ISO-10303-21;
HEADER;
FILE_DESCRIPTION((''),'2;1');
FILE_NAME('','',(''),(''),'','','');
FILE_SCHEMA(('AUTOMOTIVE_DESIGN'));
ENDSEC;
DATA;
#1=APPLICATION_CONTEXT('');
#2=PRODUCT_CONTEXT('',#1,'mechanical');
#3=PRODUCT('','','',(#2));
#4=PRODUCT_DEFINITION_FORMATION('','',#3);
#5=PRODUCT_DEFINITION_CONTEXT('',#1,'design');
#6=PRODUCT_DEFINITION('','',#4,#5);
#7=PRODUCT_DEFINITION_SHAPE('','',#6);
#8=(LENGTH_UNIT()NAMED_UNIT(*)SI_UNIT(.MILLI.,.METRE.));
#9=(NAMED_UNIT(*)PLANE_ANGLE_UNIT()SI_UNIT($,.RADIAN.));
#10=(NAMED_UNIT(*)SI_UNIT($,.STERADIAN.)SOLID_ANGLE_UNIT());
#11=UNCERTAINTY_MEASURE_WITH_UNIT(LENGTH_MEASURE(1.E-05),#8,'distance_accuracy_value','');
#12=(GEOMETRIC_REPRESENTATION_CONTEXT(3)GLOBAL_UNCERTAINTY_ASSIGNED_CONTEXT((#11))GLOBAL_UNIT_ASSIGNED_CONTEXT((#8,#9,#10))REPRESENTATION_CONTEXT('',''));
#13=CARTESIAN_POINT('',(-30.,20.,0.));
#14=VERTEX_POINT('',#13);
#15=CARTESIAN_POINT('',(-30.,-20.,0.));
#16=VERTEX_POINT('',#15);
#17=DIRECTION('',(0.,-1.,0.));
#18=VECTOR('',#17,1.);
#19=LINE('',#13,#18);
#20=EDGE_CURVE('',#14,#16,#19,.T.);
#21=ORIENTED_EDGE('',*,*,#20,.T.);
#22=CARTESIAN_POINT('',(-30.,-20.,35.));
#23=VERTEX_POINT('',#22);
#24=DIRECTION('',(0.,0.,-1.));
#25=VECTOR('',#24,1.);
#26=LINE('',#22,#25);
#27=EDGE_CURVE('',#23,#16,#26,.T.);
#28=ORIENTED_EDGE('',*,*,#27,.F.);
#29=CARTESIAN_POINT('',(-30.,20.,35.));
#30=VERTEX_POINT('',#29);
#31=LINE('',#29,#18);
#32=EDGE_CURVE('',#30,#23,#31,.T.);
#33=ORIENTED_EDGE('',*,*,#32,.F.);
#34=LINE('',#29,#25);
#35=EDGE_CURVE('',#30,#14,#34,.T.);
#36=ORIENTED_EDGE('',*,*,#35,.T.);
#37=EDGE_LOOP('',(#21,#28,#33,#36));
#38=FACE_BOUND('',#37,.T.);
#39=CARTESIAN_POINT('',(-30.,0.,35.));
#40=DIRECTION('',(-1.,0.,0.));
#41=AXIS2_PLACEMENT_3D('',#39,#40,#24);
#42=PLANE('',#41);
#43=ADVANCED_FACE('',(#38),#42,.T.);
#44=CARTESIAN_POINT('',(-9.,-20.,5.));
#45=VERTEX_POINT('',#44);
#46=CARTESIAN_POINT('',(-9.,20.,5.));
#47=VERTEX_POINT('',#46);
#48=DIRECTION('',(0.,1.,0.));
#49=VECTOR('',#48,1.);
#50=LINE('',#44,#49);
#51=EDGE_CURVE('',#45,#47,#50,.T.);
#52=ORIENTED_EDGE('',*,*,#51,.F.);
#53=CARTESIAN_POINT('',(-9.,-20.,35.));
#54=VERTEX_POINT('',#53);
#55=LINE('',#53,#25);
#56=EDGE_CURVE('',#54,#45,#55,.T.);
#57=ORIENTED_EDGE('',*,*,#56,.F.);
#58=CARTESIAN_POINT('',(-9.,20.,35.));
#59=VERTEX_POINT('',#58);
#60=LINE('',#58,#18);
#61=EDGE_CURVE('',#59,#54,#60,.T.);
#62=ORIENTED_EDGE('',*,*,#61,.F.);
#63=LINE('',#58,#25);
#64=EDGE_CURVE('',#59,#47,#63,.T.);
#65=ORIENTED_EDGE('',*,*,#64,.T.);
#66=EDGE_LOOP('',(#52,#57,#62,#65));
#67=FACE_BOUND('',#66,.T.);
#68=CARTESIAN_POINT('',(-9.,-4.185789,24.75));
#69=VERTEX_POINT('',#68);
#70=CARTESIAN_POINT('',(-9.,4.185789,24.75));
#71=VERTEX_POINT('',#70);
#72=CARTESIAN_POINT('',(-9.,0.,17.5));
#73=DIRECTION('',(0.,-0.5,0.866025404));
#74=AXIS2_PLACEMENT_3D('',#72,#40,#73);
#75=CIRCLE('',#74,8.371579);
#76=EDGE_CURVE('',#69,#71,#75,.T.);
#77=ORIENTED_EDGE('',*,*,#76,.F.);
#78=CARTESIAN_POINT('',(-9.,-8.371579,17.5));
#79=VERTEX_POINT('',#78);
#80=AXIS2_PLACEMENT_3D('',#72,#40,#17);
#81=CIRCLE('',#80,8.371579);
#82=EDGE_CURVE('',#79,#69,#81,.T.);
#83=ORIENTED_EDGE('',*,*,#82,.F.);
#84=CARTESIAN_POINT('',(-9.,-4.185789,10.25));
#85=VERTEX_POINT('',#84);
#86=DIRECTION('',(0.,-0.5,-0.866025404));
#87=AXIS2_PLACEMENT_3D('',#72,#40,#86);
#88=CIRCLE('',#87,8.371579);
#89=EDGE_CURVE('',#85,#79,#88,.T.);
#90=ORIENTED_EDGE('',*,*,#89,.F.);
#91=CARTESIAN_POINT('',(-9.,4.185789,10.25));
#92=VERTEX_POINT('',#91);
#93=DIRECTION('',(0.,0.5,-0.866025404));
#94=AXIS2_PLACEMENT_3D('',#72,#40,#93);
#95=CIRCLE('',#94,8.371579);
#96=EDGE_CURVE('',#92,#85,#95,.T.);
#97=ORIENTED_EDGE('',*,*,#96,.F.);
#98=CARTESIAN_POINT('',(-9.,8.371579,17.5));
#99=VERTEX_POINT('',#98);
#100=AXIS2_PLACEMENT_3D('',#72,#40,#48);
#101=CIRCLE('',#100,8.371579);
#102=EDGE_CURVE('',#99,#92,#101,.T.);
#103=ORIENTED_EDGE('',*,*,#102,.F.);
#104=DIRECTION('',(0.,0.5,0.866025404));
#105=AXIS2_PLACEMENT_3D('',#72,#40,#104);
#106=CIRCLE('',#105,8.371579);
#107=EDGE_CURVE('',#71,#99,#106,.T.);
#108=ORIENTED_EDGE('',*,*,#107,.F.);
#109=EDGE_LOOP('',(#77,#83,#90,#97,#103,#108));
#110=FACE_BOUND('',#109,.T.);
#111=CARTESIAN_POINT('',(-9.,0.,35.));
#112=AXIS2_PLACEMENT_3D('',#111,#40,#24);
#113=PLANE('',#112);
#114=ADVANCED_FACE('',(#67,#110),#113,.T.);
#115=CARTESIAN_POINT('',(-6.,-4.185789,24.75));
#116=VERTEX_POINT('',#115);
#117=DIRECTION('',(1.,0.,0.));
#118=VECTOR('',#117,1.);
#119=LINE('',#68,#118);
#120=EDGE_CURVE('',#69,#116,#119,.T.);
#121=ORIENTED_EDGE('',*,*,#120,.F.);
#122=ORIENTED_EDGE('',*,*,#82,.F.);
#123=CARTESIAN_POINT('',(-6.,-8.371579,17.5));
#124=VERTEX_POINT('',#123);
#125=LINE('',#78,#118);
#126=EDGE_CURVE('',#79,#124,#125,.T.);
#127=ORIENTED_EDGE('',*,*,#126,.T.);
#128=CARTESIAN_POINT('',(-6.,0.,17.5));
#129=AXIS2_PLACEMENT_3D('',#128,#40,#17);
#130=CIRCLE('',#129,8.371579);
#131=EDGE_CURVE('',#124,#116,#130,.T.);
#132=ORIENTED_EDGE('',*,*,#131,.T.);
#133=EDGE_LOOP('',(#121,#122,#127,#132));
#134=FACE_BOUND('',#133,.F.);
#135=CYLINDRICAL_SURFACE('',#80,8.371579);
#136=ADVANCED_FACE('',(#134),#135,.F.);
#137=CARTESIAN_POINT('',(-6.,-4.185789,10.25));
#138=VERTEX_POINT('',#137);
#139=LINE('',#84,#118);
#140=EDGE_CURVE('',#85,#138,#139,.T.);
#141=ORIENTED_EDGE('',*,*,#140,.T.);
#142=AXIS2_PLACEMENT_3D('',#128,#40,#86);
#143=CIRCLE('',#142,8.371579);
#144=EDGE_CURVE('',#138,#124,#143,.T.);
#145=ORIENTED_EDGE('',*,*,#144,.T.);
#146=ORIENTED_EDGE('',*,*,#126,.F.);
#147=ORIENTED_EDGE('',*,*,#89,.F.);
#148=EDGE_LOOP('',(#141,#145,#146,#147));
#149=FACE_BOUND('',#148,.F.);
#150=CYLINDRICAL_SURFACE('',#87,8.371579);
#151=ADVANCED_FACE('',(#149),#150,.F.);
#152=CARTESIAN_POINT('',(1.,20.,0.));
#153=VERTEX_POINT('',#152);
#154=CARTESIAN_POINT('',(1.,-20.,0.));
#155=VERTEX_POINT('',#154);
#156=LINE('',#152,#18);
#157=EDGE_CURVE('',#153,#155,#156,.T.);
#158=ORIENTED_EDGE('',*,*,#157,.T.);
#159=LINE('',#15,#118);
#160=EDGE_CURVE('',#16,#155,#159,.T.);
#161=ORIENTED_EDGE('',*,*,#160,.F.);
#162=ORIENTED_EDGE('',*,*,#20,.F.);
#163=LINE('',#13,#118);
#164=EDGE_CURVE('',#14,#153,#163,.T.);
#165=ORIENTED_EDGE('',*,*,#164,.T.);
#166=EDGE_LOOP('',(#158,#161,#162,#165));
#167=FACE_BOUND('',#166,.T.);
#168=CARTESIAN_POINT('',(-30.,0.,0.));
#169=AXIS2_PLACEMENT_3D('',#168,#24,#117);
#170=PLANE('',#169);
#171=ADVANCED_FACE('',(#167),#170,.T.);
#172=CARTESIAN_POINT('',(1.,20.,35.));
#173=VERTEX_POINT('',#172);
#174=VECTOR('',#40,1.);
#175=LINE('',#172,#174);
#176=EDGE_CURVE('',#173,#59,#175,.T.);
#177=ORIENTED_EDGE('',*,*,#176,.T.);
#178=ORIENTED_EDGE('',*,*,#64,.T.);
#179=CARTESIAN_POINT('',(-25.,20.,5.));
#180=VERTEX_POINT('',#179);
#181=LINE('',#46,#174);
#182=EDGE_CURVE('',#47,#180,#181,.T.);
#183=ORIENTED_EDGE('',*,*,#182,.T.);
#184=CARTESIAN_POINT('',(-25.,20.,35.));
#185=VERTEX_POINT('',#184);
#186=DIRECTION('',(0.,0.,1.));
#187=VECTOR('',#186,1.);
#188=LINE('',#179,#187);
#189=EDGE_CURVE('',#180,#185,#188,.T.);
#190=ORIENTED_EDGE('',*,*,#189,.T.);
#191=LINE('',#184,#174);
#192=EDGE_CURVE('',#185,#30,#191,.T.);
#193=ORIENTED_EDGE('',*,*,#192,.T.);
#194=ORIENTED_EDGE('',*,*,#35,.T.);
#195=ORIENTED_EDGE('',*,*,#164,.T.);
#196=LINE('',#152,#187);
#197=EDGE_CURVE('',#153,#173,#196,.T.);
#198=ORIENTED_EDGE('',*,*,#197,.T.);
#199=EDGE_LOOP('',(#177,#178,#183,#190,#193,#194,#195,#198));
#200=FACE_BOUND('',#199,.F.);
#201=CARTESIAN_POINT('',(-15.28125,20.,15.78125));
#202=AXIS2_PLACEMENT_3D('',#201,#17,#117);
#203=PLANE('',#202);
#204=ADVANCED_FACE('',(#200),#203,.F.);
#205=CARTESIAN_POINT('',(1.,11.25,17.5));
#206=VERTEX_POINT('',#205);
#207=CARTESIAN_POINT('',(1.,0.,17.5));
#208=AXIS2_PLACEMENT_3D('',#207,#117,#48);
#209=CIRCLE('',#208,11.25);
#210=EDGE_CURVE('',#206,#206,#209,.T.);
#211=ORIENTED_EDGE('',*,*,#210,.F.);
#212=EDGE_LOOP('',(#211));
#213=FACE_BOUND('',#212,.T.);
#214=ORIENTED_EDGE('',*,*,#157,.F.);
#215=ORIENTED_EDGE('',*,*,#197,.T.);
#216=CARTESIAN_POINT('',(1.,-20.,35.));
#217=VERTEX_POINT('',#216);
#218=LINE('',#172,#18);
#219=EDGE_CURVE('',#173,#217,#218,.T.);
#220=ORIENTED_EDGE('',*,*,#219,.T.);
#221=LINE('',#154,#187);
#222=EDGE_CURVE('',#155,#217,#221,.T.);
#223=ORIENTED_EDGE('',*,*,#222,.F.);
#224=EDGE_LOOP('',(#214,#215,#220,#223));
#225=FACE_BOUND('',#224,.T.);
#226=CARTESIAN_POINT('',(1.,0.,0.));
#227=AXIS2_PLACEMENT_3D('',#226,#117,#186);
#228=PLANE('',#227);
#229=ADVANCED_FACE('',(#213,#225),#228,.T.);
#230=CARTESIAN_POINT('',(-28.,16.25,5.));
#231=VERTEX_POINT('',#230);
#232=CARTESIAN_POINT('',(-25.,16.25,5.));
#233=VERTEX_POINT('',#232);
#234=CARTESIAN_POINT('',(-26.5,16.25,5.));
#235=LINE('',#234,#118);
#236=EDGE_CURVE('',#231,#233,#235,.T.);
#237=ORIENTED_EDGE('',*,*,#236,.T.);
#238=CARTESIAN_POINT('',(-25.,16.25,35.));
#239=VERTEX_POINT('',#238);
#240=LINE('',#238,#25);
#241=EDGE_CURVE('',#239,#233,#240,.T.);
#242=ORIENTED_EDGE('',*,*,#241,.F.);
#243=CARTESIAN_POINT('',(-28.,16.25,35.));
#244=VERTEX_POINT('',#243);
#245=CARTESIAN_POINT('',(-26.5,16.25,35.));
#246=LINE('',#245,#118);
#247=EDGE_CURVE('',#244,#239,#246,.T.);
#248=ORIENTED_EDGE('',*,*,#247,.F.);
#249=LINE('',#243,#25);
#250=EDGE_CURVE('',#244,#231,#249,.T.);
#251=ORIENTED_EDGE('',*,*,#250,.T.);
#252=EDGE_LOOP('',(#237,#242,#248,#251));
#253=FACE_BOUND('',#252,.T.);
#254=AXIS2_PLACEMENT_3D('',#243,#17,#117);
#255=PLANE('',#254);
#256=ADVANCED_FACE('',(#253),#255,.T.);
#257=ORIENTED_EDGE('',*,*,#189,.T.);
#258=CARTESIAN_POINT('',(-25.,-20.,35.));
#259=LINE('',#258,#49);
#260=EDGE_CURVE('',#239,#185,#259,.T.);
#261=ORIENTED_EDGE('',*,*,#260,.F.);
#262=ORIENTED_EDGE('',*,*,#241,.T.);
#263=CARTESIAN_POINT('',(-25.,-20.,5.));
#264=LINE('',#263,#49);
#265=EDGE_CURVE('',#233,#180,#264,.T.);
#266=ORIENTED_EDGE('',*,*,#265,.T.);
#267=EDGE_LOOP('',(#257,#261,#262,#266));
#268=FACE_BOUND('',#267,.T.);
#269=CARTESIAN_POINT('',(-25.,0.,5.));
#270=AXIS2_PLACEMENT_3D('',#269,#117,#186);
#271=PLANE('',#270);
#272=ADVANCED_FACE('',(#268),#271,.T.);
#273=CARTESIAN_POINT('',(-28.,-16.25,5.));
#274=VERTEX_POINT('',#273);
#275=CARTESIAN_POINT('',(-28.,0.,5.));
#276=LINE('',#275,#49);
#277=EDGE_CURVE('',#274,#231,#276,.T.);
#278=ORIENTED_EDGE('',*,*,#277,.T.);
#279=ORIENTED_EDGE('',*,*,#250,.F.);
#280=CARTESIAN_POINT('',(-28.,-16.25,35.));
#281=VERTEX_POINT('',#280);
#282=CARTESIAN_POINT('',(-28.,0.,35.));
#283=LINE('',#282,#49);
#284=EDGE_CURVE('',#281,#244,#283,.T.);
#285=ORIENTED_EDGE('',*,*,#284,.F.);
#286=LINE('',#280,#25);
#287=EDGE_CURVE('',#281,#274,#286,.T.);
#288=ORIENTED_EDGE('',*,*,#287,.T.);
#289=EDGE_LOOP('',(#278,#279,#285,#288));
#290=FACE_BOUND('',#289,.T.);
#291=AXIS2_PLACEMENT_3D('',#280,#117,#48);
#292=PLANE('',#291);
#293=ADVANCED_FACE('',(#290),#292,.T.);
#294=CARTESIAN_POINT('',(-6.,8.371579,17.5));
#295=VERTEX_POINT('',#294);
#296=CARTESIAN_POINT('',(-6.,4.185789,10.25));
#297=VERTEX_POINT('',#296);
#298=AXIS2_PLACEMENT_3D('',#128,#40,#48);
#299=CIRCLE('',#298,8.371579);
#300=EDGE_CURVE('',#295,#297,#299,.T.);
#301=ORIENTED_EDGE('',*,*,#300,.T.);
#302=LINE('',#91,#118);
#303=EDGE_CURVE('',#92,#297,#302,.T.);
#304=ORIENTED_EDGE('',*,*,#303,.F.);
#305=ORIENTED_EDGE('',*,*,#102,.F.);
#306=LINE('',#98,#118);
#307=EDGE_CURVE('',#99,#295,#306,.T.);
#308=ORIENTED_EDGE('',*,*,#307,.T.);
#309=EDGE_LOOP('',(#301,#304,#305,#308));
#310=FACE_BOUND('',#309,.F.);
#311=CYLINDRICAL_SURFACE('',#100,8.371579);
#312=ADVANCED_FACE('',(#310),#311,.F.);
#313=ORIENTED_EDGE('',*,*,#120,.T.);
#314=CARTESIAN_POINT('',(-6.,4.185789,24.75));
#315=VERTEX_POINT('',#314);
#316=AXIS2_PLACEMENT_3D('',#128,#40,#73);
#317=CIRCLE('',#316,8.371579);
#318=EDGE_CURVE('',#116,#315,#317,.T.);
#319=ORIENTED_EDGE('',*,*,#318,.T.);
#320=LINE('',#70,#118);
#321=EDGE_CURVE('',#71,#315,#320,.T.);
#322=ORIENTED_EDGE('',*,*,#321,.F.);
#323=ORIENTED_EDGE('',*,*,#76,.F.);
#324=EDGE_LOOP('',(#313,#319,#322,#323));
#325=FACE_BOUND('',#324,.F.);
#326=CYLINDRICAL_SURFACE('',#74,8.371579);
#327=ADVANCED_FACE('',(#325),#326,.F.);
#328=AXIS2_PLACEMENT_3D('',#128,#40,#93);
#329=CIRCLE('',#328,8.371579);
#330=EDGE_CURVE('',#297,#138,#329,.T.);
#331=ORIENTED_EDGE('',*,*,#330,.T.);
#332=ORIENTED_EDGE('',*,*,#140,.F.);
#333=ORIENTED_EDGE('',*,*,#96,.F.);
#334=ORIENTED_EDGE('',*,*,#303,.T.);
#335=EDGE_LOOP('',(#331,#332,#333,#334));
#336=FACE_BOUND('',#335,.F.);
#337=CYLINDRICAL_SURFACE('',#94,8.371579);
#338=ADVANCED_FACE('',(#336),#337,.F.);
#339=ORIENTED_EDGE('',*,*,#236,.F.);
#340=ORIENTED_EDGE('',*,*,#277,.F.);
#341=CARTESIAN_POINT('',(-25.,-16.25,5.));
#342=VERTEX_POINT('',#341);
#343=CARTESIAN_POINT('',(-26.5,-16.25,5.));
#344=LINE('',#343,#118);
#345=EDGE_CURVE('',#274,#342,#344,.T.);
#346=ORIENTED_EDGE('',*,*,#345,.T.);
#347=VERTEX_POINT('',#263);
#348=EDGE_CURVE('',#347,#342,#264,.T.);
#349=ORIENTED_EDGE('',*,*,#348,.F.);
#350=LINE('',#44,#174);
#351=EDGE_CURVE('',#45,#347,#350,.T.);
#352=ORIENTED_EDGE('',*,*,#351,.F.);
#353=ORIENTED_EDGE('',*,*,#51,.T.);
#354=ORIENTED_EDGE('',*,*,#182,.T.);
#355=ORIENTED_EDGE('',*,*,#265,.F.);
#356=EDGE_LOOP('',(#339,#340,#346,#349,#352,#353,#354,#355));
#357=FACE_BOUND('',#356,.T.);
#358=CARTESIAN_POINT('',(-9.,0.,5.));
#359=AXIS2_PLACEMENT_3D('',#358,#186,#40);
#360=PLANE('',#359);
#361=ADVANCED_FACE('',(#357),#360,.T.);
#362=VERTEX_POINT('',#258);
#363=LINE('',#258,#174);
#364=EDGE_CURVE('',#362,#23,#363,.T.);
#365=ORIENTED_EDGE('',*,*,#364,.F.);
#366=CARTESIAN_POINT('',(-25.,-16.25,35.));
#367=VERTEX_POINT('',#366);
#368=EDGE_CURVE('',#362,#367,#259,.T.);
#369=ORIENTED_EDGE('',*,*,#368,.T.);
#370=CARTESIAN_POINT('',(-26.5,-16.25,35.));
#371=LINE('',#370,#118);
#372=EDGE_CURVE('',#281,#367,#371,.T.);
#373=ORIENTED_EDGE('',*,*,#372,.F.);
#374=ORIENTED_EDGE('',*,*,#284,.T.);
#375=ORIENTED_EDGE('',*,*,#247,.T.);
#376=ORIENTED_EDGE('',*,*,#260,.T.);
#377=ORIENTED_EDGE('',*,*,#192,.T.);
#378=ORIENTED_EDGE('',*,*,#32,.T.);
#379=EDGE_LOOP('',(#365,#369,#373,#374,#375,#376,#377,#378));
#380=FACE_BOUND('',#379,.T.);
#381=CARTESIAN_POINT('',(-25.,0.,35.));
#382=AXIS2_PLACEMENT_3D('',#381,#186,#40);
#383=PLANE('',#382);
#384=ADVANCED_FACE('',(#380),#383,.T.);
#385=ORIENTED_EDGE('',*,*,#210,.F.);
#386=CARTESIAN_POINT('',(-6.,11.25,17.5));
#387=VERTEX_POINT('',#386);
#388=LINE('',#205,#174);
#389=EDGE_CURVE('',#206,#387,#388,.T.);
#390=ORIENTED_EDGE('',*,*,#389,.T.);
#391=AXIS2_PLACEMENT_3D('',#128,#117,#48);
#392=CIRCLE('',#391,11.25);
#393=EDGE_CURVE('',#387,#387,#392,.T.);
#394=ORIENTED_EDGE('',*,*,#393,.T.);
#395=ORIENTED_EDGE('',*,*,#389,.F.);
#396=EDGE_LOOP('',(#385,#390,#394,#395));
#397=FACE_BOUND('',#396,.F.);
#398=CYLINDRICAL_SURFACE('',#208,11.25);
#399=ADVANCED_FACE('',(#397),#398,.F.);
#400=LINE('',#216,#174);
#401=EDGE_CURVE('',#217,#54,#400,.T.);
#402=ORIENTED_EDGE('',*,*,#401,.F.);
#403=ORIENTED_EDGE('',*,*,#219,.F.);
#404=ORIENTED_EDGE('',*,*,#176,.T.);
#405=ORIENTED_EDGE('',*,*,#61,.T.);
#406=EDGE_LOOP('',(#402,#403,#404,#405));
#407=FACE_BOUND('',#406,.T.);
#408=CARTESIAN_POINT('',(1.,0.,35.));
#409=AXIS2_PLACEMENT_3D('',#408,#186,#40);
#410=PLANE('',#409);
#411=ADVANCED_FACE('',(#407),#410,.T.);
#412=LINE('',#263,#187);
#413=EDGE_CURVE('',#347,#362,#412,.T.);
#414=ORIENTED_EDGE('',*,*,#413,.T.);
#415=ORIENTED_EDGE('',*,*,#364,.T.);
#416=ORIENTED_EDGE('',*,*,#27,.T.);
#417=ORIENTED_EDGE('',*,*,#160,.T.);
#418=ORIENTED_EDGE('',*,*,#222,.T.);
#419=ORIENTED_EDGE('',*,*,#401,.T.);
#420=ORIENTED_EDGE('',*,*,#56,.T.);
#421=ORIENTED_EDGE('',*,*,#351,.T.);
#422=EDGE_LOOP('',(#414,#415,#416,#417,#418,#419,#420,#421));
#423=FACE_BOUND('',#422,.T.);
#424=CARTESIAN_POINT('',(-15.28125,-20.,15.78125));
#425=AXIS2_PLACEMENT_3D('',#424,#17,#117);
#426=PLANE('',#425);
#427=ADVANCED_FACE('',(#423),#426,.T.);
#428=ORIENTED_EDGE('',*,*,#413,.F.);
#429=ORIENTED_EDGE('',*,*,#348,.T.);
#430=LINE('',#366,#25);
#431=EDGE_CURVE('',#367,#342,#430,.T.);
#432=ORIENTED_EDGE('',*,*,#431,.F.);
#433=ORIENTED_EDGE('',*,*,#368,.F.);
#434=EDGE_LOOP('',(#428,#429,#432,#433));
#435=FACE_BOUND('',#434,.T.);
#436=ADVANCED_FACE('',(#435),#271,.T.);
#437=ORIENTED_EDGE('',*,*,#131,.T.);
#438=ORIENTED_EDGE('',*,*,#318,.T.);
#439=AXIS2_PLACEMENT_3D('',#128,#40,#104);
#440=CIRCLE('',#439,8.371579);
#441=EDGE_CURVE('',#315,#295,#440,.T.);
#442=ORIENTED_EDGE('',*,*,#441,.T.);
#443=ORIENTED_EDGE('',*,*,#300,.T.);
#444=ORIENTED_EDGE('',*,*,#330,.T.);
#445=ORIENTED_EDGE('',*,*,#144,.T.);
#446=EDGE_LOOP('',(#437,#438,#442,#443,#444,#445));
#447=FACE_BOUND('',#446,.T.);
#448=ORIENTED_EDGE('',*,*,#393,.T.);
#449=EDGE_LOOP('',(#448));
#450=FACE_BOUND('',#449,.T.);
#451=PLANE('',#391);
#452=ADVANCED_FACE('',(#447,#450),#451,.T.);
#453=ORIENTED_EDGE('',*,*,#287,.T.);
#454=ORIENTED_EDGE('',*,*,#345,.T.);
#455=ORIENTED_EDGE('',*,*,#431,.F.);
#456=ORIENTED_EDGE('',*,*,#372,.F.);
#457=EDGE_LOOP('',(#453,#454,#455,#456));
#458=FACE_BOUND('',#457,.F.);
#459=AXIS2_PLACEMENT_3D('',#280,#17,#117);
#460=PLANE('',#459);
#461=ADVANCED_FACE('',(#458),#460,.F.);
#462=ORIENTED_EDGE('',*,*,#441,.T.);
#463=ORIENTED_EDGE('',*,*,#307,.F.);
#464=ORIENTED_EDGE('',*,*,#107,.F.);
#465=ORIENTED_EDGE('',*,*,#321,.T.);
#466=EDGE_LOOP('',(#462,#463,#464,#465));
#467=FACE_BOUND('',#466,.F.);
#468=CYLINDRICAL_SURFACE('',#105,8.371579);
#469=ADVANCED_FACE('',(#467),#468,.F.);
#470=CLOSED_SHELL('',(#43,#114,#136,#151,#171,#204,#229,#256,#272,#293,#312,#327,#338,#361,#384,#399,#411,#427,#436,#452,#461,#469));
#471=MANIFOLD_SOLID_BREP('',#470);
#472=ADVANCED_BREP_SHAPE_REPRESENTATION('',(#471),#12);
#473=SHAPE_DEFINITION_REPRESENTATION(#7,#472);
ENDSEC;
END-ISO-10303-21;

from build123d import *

# Parameters (mm, degrees)
F1_DEPTH = 20
F2_R     = 11.25
F3_DEPTH = 7
F4_R     = 6.75
F5_DEPTH = 5
F6_W     = 3
F6_H     = 32.5
F7_DEPTH = 30
F8_R     = 6.75
F9_DEPTH = 25


with BuildPart() as f1:
    # F0 (on Front) → F1 (new body, symmetric)
    with BuildSketch(Plane.XZ):
        Polygon((-25, 35), (-30, 35), (-30, 0), (1, 0), (1, 35), (-9, 35), (-9, 5), (-25, 5), align=None)
    extrude(amount=F1_DEPTH, both=True)

    # F2 (on face) → F3 (cut)
    with BuildSketch(Plane.YZ.offset(1)):
        with Locations((0, 17.5)):
            Circle(F2_R)
    extrude(amount=-F3_DEPTH, mode=Mode.SUBTRACT)

    # F4 (on face) → F5 (cut)
    with BuildSketch(Plane.YZ.offset(-6)):
        with Locations((0, 17.5)):
            Circle(F4_R)
    extrude(amount=-F5_DEPTH, mode=Mode.SUBTRACT)

    # F6 (on face) → F7 (cut)
    with BuildSketch(Plane.XY.offset(35)):
        with Locations((-26.5, 0)):
            Rectangle(F6_W, F6_H)
    extrude(amount=-F7_DEPTH, mode=Mode.SUBTRACT)

    # F8 (on face) → F9 (cut)
    with BuildSketch(Plane(origin=(-9, 0, 0), x_dir=(0, -1, 0), z_dir=(-1, 0, 0))):
        Polygon((4.1857894516, 24.75), (-4.1857894516, 24.75), (-8.3715789032, 17.5), (-4.1857894516, 10.25), (4.1857894516, 10.25), (8.3715789032, 17.5), align=None)
        with Locations((0, 17.5)):
            Circle(F8_R, mode=Mode.SUBTRACT)
        with Locations((0, 17.5)):
            Circle(F8_R)
        with BuildLine():
            ThreePointArc((4.1857894516, 24.75), (0, 25.8715789032), (-4.1857894516, 24.75))
            Line((-4.1857894516, 24.75), (4.1857894516, 24.75))
        make_face()
        with BuildLine():
            Line((-8.3715789032, 17.5), (-4.1857894516, 24.75))
            ThreePointArc((-4.1857894516, 24.75), (-7.25, 21.6857894516), (-8.3715789032, 17.5))
        make_face()
        with BuildLine():
            ThreePointArc((8.3715789032, 17.5), (7.25, 21.6857894516), (4.1857894516, 24.75))
            Line((4.1857894516, 24.75), (8.3715789032, 17.5))
        make_face()
        with BuildLine():
            Line((-4.1857894516, 10.25), (-8.3715789032, 17.5))
            ThreePointArc((-8.3715789032, 17.5), (-7.25, 13.3142105484), (-4.1857894516, 10.25))
        make_face()
        with BuildLine():
            ThreePointArc((4.1857894516, 10.25), (7.25, 13.3142105484), (8.3715789032, 17.5))
            Line((8.3715789032, 17.5), (4.1857894516, 10.25))
        make_face()
        with BuildLine():
            Line((4.1857894516, 10.25), (-4.1857894516, 10.25))
            ThreePointArc((-4.1857894516, 10.25), (0, 9.1284210968), (4.1857894516, 10.25))
        make_face()
    extrude(amount=-F9_DEPTH, mode=Mode.SUBTRACT)


solid = f1.part
